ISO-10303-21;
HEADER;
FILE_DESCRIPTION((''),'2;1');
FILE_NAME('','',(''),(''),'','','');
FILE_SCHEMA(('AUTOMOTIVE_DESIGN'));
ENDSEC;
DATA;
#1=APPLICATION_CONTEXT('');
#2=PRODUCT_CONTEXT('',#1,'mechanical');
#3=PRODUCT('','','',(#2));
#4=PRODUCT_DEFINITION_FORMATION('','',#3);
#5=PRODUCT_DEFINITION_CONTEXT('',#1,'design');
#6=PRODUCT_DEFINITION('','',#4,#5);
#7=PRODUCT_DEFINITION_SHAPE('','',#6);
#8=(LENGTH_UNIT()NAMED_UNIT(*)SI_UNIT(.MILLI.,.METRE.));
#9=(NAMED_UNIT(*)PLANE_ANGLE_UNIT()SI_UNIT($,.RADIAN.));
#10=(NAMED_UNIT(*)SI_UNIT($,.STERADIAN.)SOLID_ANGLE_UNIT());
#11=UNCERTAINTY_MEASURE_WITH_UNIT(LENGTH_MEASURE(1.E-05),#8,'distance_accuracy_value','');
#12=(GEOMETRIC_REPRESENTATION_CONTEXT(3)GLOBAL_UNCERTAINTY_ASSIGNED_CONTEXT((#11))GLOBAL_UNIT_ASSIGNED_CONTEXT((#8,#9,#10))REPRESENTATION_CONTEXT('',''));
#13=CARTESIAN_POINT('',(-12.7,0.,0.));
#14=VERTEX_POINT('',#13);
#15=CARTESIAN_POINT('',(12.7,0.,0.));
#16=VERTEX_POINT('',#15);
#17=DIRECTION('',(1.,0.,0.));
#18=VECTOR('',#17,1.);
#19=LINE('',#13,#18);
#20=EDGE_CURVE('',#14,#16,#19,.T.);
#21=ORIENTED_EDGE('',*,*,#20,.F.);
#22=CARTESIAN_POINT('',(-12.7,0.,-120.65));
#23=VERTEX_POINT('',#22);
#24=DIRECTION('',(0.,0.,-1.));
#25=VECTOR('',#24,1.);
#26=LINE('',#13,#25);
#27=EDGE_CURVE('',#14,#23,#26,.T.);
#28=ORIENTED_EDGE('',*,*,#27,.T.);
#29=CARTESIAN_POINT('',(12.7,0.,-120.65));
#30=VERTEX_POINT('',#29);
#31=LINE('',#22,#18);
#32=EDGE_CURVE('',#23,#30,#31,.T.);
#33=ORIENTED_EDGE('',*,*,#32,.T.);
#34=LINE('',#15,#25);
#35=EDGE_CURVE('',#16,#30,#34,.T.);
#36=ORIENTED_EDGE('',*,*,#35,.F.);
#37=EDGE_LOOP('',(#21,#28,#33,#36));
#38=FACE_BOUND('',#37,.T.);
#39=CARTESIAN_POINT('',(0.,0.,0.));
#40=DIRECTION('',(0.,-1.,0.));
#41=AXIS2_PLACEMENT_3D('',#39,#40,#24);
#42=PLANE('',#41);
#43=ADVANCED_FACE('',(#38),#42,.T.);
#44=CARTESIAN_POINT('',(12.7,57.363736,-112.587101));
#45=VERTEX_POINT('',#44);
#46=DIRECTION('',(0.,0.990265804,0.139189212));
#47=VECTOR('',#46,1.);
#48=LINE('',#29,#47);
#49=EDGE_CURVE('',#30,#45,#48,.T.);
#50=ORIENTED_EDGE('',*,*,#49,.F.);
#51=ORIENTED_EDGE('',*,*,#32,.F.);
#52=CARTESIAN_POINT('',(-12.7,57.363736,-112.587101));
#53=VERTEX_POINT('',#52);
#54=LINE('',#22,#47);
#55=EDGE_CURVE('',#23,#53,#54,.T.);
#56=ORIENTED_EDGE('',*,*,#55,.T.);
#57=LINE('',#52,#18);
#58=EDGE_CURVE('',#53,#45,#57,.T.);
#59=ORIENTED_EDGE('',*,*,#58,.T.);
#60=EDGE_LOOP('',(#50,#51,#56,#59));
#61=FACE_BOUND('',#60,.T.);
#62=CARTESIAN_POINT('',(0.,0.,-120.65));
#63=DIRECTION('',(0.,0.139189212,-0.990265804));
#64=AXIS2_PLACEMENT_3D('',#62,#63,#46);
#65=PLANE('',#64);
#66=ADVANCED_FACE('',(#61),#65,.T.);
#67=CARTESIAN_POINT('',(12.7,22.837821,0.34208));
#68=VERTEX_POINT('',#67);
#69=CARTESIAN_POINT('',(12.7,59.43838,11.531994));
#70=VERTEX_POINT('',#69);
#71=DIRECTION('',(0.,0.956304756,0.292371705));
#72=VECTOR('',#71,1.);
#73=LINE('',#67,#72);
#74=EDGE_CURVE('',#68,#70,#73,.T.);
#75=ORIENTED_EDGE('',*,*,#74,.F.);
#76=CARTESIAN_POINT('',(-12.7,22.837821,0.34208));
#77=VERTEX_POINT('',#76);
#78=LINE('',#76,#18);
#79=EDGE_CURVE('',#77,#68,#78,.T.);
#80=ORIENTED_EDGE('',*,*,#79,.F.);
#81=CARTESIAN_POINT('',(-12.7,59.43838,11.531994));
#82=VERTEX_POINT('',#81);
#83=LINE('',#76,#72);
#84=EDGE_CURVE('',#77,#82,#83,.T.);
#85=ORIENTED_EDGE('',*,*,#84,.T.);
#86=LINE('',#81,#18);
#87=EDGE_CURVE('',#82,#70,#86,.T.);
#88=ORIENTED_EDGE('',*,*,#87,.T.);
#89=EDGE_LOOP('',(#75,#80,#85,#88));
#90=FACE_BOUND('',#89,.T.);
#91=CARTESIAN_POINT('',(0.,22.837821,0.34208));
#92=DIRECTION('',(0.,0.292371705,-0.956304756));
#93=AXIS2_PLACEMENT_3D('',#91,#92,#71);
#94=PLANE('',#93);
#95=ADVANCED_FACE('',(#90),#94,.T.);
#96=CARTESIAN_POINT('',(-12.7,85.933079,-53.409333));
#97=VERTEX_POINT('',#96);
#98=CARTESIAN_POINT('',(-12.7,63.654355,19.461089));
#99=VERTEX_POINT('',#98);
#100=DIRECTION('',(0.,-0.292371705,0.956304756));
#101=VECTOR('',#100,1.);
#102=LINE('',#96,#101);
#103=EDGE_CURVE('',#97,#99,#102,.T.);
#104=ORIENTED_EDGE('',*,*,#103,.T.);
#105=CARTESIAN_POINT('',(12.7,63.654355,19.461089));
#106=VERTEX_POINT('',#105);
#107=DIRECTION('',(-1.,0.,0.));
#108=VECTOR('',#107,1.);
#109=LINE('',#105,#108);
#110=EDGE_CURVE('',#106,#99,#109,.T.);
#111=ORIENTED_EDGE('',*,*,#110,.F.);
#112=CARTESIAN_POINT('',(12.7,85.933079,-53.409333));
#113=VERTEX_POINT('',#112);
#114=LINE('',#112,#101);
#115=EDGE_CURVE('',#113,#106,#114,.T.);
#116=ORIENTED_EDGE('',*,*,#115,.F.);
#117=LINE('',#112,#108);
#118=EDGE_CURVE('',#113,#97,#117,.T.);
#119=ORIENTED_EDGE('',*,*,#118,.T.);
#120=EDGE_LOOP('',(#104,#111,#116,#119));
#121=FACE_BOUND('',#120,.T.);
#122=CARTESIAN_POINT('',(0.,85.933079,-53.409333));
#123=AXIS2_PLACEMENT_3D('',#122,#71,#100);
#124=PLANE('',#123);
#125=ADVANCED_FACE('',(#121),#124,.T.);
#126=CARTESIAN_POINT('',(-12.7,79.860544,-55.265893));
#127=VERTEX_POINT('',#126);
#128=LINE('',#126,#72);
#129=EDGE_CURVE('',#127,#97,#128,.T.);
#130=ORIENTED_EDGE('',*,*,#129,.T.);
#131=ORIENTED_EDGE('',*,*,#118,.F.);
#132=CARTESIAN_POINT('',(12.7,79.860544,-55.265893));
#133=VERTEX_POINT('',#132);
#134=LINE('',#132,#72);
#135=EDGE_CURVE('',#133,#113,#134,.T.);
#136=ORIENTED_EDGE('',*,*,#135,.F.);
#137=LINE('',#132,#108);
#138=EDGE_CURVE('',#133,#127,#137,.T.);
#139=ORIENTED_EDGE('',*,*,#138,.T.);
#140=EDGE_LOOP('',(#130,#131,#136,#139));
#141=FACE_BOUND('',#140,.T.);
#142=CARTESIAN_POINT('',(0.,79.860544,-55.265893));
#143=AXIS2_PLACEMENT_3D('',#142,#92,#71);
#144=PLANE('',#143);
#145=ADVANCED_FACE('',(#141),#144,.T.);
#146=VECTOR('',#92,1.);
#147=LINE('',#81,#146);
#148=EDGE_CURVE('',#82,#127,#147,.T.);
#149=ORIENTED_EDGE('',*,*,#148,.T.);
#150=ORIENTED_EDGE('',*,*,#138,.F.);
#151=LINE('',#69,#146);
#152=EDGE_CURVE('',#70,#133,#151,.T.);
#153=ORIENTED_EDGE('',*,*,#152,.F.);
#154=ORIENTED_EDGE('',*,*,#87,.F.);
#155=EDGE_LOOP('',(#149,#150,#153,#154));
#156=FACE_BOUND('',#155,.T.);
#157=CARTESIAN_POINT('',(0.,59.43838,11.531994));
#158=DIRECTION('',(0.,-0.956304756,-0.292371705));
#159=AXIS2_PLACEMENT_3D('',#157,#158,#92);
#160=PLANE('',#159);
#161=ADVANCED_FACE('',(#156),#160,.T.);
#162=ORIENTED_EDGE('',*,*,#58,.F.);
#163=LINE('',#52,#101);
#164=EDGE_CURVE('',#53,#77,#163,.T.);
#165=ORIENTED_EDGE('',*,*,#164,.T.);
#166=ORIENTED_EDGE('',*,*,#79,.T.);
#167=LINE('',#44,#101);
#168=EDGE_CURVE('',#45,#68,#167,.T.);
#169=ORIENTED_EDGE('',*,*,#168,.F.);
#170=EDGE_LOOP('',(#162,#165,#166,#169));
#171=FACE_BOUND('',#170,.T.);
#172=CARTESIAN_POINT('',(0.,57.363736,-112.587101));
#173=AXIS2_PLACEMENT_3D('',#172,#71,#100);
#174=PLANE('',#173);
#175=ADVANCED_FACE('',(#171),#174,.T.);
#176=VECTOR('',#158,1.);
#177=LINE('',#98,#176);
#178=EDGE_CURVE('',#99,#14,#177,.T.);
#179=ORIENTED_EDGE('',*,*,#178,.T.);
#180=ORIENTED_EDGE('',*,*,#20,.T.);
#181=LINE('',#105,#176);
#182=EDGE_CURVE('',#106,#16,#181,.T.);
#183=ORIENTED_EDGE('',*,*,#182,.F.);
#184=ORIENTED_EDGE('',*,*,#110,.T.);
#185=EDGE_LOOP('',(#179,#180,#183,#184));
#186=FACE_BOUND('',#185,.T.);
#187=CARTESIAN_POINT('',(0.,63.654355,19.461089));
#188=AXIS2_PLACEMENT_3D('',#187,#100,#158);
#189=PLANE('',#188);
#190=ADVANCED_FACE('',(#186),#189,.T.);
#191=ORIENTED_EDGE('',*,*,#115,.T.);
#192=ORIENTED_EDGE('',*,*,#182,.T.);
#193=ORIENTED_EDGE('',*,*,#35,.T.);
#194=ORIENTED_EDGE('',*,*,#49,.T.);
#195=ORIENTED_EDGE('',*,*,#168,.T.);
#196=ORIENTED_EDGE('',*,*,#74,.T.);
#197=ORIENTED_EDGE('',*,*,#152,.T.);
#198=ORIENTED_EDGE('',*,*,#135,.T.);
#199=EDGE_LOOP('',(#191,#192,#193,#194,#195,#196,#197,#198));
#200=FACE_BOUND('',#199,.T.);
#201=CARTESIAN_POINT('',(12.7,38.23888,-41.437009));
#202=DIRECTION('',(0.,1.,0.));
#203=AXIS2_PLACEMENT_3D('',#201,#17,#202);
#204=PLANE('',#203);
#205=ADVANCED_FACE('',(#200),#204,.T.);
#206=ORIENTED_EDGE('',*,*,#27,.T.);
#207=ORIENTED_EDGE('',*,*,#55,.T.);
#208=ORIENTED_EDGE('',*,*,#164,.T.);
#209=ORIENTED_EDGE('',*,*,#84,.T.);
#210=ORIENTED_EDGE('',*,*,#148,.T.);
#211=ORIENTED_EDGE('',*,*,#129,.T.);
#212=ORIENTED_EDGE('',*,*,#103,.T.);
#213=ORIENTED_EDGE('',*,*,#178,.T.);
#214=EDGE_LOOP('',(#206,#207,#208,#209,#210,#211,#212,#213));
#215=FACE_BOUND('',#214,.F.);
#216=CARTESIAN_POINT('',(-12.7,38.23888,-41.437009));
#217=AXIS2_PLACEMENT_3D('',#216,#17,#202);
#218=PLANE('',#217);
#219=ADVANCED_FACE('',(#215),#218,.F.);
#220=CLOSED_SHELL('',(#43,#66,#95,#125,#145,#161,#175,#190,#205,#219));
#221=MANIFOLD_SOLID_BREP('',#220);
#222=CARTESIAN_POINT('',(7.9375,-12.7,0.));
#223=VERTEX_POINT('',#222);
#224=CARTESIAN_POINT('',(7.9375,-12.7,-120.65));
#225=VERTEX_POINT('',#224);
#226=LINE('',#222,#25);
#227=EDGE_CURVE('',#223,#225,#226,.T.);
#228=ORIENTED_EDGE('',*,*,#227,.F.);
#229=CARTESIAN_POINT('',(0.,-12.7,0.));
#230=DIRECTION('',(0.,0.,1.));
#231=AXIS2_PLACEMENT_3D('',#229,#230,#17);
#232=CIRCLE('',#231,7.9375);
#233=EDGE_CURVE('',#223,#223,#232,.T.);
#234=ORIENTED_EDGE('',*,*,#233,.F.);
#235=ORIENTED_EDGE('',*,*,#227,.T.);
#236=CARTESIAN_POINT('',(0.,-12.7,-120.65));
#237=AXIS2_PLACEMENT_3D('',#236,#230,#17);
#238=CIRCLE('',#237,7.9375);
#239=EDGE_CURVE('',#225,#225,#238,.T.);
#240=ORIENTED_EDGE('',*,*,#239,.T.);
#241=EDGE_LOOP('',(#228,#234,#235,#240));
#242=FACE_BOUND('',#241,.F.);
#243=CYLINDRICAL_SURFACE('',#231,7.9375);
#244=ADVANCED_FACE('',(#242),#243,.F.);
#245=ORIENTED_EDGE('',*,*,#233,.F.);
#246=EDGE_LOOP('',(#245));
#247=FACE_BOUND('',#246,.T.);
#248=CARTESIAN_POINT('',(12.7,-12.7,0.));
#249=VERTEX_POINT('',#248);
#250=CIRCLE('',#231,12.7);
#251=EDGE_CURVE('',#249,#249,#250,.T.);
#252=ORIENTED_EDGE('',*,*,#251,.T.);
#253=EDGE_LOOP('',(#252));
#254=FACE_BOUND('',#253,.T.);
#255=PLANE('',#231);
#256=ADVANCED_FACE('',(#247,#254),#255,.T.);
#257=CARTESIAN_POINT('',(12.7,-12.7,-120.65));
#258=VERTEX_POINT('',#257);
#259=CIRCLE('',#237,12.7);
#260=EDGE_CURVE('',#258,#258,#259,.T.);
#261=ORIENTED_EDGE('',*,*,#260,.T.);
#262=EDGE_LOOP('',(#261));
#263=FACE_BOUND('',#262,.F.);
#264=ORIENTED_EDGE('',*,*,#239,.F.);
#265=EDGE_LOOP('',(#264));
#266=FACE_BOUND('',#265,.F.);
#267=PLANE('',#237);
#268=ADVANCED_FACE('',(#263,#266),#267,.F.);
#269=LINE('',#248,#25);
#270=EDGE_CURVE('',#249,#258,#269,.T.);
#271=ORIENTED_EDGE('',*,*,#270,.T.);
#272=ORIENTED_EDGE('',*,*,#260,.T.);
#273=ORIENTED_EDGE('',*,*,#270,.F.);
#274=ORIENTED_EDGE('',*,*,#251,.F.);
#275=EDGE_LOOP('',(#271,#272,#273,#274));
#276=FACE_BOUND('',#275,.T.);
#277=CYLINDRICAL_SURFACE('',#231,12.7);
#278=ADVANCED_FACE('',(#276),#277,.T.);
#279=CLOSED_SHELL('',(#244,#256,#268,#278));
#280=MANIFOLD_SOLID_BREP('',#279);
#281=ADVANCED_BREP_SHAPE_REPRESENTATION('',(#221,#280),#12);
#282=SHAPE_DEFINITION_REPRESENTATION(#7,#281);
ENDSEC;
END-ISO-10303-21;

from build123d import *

# Parameters (mm, degrees)
F1_R     = 12.7
F1_R_2   = 7.9375
F2_DEPTH = 120.65
F3_DEPTH = 12.7
F6_DEPTH = 12.7


with BuildPart() as f2:
    # F1 (on Top) → F2 (new body)
    with BuildSketch(Plane.XY):
        with Locations((0, -12.7)):
            Circle(F1_R)
        with Locations((0, -12.7)):
            Circle(F1_R_2, mode=Mode.SUBTRACT)
    extrude(amount=-F2_DEPTH)


with BuildPart() as f3:
    # F0 (on Right) → F3 (new body, symmetric)
    with BuildSketch(Plane.YZ):
        Polygon((97.6843618562, -152.4), (50.8, 0), (0, 0), (0, -152.4), align=None)
        Polygon((0, 0), (50.8, 0), (40.5959168923, 31.3409897747), align=None)
        Polygon((40.5959168923, 31.3409897747), (50.8, 0), (99.3542851518, 14.9372485218), (136.6974064563, -106.4484643576), (185.251691608, -91.5112158358), (165.7442559226, -28.1013051372), (113.4819560317, 57.5799615131), align=None)
    extrude(amount=F3_DEPTH, both=True)


with BuildPart() as f6:
    # F5 (on Right) → F6 (new body, symmetric)
    with BuildSketch(Plane.YZ):
        Polygon((63.6543548718, 19.4610892928), (0, 0), (0, -120.65), (57.3637361695, -112.587100946), (22.8378207674, 0.3420798526), (59.4383799965, 11.5319937674), (79.8605435713, -55.2658934366), (85.9330787717, -53.4093331116), align=None)
    extrude(amount=F6_DEPTH, both=True)


solid = Compound([f2.part, f6.part])
